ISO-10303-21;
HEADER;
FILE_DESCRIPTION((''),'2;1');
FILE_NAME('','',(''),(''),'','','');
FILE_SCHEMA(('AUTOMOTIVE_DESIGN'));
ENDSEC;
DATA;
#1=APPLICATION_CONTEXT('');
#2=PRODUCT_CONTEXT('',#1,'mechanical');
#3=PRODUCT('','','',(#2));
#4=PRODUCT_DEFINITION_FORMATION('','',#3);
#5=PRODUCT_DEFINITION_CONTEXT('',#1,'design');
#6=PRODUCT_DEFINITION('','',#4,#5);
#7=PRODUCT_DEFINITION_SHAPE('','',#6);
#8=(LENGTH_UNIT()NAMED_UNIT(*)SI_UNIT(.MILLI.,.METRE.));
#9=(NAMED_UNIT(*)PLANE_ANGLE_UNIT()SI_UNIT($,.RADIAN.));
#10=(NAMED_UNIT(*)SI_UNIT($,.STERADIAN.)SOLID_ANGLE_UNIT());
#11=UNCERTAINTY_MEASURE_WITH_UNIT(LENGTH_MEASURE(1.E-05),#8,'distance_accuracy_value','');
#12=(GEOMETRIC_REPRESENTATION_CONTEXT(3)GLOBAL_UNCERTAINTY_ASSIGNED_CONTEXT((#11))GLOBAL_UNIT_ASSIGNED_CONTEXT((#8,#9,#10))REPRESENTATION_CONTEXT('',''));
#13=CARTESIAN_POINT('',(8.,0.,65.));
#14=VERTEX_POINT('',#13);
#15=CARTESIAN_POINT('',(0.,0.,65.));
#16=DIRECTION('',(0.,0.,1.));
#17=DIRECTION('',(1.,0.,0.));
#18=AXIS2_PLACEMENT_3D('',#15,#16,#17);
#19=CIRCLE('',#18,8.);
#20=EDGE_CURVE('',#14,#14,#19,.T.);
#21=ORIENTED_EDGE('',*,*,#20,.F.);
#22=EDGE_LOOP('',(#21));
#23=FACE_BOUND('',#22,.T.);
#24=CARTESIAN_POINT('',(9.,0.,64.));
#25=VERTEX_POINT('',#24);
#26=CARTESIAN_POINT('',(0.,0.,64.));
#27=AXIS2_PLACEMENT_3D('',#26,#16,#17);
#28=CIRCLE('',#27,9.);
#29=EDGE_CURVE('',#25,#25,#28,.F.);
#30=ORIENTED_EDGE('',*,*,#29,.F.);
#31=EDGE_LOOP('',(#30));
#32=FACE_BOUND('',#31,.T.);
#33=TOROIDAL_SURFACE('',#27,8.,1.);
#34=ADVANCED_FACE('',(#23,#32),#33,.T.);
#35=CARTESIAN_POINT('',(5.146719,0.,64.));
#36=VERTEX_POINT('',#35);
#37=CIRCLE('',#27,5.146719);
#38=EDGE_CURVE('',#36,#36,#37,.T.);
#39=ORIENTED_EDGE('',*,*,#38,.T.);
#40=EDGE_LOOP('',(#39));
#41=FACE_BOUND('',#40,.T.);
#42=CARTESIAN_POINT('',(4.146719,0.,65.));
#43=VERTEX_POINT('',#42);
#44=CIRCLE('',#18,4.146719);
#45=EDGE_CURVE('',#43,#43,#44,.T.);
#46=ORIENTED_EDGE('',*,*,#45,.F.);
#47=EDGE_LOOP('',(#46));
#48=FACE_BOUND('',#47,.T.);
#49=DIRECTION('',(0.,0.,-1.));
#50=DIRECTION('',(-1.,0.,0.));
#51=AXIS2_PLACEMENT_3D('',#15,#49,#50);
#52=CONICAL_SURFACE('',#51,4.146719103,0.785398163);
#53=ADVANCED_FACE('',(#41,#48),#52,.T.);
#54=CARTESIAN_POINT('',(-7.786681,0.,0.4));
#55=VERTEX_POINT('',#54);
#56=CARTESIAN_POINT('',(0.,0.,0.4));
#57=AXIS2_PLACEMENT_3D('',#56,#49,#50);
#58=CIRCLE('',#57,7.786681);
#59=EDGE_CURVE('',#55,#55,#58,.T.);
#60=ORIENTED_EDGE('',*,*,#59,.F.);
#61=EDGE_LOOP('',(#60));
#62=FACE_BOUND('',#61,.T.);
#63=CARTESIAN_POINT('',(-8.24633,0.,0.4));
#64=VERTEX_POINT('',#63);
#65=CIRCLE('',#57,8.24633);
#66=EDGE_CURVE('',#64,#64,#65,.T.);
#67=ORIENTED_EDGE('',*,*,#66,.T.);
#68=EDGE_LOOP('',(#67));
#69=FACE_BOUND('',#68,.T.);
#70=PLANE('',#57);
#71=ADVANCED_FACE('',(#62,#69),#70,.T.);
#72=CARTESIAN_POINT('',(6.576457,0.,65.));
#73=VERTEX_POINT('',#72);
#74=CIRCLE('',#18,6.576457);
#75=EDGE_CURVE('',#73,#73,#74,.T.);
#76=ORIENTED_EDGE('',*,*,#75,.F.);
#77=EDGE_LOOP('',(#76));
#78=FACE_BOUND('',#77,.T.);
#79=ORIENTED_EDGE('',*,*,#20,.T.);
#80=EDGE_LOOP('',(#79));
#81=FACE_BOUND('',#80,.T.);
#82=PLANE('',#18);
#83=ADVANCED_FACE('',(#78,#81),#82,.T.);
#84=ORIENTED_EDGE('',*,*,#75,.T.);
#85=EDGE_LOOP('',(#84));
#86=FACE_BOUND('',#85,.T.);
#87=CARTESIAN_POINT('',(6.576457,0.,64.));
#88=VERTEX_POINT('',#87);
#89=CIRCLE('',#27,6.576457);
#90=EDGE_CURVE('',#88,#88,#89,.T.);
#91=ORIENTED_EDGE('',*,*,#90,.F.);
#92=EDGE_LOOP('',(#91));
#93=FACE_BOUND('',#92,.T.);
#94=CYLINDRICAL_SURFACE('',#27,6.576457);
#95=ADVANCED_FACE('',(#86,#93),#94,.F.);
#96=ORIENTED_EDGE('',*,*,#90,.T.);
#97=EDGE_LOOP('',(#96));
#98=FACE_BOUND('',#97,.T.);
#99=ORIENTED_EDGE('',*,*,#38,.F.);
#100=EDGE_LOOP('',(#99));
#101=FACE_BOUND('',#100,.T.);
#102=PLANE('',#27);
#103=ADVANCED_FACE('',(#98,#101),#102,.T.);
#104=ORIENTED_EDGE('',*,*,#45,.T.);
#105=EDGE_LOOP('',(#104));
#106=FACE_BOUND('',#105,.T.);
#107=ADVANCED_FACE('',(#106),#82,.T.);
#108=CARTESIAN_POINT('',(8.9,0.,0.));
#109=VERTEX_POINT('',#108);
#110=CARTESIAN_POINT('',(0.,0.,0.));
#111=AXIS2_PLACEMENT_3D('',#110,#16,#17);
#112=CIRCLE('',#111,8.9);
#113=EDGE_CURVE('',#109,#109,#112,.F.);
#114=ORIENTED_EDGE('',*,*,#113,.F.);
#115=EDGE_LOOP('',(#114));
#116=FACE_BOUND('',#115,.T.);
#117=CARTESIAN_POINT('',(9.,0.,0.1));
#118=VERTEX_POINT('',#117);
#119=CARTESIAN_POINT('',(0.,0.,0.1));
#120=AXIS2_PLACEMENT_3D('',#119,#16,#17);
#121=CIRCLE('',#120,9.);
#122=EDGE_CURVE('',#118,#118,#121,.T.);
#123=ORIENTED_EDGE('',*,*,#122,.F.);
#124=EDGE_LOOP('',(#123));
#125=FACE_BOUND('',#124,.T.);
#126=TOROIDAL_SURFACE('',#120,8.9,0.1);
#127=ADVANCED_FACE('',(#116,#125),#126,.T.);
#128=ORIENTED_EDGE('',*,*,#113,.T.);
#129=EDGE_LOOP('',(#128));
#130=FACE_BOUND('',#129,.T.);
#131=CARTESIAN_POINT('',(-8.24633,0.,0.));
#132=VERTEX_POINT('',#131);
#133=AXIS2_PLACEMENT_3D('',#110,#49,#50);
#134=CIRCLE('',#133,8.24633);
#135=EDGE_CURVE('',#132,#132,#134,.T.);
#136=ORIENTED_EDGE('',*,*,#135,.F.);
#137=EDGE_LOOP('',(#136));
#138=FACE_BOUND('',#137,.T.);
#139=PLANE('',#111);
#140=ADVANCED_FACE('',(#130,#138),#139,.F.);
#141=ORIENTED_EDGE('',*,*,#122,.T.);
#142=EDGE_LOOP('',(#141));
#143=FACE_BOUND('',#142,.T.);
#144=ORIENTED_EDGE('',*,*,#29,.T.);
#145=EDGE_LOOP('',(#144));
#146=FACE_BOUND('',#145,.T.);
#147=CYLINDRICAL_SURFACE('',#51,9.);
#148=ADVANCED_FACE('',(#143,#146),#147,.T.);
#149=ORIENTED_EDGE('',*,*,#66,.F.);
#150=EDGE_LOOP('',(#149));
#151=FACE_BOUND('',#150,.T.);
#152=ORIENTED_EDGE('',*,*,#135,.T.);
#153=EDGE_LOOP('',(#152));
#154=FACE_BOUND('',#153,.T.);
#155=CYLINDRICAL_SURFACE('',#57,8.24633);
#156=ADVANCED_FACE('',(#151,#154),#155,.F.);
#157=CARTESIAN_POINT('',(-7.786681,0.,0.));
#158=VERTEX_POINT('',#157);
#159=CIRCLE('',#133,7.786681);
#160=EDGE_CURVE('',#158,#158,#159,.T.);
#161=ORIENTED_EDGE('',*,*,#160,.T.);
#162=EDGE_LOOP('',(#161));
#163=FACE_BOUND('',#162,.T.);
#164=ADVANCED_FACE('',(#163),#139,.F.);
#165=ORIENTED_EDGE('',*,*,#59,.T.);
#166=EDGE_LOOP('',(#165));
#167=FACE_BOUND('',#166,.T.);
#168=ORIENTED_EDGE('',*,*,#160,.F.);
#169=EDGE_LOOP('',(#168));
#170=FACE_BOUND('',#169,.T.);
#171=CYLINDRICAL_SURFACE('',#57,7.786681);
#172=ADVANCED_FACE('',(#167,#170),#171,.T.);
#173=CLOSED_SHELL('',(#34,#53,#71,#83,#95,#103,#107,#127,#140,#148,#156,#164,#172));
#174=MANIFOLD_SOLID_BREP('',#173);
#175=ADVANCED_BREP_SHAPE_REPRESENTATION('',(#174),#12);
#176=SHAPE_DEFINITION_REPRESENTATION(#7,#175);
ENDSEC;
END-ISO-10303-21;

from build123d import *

# Parameters (mm, degrees)
SKETCH1_R           = 9
BOSS_EXTRUDE1_DEPTH = 65
SKETCH2_R           = 6.576456623
SKETCH2_R_2         = 5.146719103
CUT_EXTRUDE2_DEPTH  = 1
FILLET1_R           = 1
CHAMFER1_SIZE       = 1
SKETCH3_R           = 8.24633038
SKETCH3_R_2         = 7.786680871
CUT_EXTRUDE3_DEPTH  = 0.4
FILLET2_R           = 0.1


with BuildPart() as part:
    # Sketch1 → Boss-Extrude1 (new body)
    with BuildSketch(Plane.XY):
        Circle(SKETCH1_R)
    extrude(amount=BOSS_EXTRUDE1_DEPTH)

    # Sketch2 → Cut-Extrude2 (cut)
    with BuildSketch(Plane.XY.offset(65)):
        Circle(SKETCH2_R)
        Circle(SKETCH2_R_2, mode=Mode.SUBTRACT)
    extrude(amount=-CUT_EXTRUDE2_DEPTH, mode=Mode.SUBTRACT)

    # Fillet1
    fillet1_edges = [part.edges().sort_by_distance(p)[0] for p in [
        (-9, 0, 65),
    ]]
    fillet(fillet1_edges, radius=FILLET1_R)

    # Chamfer1
    chamfer1_edges = [part.edges().sort_by_distance(p)[0] for p in [
        (-5.146719103, 0, 65),
    ]]
    chamfer(chamfer1_edges, length=CHAMFER1_SIZE - 0.0001)  # a hair under: the kernel refuses the full size

    # Sketch3 → Cut-Extrude3 (cut)
    with BuildSketch(Plane(origin=(0, 0, 0), x_dir=(-1, 0, 0), z_dir=(0, 0, -1))):
        Circle(SKETCH3_R)
        Circle(SKETCH3_R_2, mode=Mode.SUBTRACT)
    extrude(amount=-CUT_EXTRUDE3_DEPTH, mode=Mode.SUBTRACT)

    # Fillet2
    fillet2_edges = [part.edges().sort_by_distance(p)[0] for p in [
        (-9, 0, 0),
    ]]
    fillet(fillet2_edges, radius=FILLET2_R)


solid = part.part
